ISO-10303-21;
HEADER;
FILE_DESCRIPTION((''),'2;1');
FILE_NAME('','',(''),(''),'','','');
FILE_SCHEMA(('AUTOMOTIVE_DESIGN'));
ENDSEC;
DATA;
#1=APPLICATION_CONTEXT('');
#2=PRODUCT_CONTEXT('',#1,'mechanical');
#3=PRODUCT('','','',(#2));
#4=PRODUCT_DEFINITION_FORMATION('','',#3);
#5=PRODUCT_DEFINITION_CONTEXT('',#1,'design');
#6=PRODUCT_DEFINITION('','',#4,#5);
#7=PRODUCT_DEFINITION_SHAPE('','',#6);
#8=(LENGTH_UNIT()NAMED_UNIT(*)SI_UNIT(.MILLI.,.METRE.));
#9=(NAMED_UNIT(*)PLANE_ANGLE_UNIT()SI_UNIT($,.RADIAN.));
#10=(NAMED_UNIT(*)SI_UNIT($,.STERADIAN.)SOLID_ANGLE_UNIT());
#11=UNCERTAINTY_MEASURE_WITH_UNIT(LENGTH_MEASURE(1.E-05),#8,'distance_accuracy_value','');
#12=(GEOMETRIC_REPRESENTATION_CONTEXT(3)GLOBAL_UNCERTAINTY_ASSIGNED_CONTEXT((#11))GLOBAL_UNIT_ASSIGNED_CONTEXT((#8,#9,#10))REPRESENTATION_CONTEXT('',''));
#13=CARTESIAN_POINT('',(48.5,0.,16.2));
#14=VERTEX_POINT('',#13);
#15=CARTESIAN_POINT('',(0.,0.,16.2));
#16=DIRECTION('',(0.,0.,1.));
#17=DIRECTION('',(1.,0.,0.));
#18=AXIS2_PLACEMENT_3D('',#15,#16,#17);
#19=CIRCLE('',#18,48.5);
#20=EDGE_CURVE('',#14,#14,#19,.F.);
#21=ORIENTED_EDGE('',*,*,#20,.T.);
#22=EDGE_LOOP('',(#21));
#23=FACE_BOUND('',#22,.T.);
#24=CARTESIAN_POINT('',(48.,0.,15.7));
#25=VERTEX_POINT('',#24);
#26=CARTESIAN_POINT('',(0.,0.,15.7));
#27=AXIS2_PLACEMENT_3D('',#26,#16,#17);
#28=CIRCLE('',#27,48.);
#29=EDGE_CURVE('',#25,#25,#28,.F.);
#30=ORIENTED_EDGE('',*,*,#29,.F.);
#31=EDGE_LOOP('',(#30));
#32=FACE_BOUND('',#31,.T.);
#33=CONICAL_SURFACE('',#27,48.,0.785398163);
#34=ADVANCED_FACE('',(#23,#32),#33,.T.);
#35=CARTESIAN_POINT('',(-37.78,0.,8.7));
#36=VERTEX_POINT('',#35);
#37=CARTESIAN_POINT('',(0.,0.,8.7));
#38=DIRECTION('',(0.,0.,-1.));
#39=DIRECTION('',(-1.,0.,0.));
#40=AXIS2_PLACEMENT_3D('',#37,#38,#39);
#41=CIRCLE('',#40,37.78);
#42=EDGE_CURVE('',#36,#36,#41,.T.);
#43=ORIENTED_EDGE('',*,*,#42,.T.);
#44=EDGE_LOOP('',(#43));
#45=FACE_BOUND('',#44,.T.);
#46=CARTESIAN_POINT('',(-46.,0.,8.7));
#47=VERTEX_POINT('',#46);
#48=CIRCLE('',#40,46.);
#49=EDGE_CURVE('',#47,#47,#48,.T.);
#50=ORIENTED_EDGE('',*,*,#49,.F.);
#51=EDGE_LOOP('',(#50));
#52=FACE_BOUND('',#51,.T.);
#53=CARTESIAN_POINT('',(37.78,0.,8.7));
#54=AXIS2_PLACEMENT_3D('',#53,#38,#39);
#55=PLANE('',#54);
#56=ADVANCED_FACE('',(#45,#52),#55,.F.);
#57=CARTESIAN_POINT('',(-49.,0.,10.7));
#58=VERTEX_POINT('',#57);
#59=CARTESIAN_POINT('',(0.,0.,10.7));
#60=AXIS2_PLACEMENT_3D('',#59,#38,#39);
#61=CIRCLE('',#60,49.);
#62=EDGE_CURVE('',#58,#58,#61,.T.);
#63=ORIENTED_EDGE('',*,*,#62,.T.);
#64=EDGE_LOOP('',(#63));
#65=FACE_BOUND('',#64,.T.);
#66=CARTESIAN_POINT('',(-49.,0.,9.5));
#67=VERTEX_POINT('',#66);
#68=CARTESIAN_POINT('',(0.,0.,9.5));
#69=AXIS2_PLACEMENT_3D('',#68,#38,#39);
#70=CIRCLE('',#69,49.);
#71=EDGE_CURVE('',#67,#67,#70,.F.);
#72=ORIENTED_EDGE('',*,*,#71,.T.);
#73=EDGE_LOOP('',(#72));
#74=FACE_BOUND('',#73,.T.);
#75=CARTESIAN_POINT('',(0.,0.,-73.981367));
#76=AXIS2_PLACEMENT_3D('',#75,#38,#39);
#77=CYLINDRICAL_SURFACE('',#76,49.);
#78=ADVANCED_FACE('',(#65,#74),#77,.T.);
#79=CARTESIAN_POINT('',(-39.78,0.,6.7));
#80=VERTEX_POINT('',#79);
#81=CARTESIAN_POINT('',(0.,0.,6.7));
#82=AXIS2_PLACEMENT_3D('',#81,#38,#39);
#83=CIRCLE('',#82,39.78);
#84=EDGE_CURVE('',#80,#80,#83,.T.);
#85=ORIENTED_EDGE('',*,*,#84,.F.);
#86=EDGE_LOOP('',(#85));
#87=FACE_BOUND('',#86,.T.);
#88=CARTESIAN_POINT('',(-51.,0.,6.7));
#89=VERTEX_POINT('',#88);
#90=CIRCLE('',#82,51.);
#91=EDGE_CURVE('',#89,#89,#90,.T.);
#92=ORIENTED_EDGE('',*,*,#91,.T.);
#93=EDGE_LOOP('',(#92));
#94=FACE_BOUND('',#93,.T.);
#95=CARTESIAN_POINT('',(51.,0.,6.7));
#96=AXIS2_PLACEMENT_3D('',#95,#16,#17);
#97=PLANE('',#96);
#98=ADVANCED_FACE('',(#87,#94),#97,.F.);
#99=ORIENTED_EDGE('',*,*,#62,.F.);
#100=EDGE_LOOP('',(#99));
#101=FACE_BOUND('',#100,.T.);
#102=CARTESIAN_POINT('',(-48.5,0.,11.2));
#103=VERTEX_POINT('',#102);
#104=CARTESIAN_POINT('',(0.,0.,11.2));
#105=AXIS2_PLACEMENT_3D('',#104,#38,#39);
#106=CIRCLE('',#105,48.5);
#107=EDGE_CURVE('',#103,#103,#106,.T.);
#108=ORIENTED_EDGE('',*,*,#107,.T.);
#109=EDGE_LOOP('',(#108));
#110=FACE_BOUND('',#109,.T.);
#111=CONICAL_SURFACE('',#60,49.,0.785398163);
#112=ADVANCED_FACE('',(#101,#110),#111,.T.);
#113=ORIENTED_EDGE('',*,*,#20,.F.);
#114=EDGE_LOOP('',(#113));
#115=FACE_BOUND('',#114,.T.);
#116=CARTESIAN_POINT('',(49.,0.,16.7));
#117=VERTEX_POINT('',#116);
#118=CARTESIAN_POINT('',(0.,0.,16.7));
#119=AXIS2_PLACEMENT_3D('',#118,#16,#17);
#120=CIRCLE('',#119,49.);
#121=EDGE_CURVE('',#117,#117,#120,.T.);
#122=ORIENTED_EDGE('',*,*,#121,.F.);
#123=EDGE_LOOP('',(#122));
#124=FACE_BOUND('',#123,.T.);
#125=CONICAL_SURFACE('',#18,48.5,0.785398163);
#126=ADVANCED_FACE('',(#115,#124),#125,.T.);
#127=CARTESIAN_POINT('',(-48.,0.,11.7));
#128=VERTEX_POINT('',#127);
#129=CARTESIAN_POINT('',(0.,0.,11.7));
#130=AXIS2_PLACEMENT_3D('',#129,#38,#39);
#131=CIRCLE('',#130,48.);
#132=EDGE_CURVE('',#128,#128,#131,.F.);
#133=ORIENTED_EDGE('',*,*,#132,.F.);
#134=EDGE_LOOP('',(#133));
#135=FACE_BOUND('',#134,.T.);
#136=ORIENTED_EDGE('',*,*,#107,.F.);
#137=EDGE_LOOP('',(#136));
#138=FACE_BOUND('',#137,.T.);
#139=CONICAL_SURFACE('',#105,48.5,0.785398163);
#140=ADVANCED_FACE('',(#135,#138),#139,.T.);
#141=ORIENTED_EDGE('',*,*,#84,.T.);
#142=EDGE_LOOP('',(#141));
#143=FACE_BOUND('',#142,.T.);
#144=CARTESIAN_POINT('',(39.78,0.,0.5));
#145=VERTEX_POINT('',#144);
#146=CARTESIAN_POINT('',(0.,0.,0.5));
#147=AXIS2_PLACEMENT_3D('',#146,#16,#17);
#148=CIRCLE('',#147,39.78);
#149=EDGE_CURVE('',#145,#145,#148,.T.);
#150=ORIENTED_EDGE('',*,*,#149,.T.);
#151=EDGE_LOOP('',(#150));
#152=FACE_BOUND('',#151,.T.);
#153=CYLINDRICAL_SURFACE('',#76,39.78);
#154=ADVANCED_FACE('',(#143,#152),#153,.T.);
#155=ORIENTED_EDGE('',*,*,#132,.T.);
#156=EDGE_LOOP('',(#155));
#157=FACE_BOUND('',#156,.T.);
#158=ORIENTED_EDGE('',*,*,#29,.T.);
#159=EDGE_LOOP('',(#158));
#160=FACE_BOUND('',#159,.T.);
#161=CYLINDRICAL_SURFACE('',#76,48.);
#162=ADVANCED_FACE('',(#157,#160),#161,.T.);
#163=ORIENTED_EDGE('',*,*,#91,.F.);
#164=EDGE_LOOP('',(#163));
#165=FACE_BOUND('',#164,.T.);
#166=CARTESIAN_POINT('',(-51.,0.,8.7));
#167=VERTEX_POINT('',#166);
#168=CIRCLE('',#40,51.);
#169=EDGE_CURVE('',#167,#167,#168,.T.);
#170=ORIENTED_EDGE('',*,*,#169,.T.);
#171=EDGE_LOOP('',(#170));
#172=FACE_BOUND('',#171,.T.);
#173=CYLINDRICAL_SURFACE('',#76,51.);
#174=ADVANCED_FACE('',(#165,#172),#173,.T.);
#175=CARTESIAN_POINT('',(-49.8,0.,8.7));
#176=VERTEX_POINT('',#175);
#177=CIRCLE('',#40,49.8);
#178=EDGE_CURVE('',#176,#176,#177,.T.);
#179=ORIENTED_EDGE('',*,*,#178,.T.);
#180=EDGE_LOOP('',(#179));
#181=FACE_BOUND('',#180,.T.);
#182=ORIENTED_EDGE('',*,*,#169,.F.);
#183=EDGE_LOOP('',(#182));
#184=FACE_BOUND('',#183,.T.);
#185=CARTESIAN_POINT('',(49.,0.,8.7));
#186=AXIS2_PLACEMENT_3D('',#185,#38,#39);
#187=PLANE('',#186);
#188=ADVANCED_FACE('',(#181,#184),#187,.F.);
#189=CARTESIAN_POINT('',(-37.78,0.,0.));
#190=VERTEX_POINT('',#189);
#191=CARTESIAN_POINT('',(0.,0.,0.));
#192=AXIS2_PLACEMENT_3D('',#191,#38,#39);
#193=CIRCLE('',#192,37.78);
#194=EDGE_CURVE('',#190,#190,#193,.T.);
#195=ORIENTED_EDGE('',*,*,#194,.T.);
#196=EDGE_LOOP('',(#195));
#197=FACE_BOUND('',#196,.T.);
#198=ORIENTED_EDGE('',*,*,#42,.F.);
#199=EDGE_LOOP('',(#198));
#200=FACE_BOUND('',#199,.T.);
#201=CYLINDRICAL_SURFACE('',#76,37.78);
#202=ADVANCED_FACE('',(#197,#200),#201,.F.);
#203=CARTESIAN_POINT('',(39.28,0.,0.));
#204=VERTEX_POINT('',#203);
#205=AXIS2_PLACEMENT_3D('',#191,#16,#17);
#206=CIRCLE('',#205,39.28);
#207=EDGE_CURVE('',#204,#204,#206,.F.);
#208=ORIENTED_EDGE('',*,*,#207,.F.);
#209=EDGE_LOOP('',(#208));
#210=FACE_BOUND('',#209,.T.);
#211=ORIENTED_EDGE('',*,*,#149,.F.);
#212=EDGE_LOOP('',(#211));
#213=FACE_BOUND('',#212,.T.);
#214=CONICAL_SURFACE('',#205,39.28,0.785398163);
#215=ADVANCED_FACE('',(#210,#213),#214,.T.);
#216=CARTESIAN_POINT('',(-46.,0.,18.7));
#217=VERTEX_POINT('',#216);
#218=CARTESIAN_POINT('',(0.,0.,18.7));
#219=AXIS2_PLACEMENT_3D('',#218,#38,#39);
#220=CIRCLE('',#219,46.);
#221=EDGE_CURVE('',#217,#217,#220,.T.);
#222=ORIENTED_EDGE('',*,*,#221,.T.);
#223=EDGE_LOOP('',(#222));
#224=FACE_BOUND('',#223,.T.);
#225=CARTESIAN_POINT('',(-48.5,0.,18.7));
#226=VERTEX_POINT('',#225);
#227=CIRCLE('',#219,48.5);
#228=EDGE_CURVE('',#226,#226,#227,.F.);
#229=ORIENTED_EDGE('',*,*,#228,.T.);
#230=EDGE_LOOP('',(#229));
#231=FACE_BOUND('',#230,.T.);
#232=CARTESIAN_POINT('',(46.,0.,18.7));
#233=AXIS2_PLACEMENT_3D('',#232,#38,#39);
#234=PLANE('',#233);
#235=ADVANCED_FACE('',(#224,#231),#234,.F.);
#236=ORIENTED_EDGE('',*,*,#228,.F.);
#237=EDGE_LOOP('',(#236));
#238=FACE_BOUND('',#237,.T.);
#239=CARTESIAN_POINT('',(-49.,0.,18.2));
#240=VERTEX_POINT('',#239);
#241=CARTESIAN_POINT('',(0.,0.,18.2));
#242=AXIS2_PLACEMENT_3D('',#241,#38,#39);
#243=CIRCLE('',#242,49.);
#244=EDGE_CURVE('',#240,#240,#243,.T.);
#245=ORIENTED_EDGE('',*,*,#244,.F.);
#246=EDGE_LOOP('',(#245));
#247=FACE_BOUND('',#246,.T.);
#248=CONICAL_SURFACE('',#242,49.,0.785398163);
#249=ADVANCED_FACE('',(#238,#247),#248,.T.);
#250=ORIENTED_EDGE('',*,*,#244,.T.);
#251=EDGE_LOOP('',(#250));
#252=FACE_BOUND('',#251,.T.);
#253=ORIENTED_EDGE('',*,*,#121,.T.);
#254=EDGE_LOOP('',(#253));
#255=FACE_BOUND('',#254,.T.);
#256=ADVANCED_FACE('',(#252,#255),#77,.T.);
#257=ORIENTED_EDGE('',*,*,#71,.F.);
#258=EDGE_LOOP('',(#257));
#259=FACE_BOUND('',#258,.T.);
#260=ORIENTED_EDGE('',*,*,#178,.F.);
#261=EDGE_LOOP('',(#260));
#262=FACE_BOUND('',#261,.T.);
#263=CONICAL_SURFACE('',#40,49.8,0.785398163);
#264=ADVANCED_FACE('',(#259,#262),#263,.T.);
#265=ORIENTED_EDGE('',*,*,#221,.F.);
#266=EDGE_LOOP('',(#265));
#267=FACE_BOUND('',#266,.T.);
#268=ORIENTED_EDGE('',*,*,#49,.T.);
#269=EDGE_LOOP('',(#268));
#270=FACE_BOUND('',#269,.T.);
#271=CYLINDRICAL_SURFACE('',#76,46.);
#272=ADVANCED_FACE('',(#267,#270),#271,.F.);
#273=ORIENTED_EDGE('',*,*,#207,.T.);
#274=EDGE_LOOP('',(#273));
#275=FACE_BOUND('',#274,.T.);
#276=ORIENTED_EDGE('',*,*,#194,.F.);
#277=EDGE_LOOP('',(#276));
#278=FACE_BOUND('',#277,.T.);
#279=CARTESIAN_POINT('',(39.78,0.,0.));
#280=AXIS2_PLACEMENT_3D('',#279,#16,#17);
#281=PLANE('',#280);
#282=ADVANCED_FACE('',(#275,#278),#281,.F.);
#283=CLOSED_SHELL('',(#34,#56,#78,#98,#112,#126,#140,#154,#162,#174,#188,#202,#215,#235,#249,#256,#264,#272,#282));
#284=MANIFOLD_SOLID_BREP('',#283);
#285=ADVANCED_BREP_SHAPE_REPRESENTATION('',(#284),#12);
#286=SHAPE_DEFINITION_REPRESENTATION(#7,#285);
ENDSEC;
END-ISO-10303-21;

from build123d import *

# Parameters (mm, degrees)
CHAMFER1_SIZE = 0.5
CHAMFER2_SIZE = 0.8


with BuildPart() as part:
    # Sketch1 → Revolve1 (revolve)
    with BuildSketch(Plane(origin=(0, 0, 0), x_dir=(1, 0, 0), z_dir=(0, 1, 0)), mode=Mode.PRIVATE) as revolve1_sk:
        Polygon((37.78, 0), (37.78, -8.7), (46, -8.7), (46, -18.7), (49, -18.7), (49, -16.2), (48, -16.2), (48, -11.2), (49, -11.2), (49, -8.7), (51, -8.7), (51, -6.7), (39.78, -6.7), (39.78, 0), align=None)
    revolve(revolve1_sk.sketch.rotate(Axis((0, 0, -73.981367368), (0, 0, 1)), 180), axis=Axis((0, 0, -73.981367368), (0, 0, 1)))

    # Chamfer1
    chamfer1_edges = [part.edges().sort_by_distance(p)[0] for p in [
        (49, 0, 11.2),
        (48, 0, 11.2),
        (48, 0, 16.2),
        (49, 0, 16.2),
        (49, 0, 18.7),
        (39.78, 0, 0),
    ]]
    chamfer(chamfer1_edges, length=CHAMFER1_SIZE - 0.0001)  # a hair under: the kernel refuses the full size

    # Chamfer2
    chamfer2_edges = [part.edges().sort_by_distance(p)[0] for p in [
        (49, 0, 8.7),
    ]]
    chamfer(chamfer2_edges, length=CHAMFER2_SIZE)


solid = part.part
